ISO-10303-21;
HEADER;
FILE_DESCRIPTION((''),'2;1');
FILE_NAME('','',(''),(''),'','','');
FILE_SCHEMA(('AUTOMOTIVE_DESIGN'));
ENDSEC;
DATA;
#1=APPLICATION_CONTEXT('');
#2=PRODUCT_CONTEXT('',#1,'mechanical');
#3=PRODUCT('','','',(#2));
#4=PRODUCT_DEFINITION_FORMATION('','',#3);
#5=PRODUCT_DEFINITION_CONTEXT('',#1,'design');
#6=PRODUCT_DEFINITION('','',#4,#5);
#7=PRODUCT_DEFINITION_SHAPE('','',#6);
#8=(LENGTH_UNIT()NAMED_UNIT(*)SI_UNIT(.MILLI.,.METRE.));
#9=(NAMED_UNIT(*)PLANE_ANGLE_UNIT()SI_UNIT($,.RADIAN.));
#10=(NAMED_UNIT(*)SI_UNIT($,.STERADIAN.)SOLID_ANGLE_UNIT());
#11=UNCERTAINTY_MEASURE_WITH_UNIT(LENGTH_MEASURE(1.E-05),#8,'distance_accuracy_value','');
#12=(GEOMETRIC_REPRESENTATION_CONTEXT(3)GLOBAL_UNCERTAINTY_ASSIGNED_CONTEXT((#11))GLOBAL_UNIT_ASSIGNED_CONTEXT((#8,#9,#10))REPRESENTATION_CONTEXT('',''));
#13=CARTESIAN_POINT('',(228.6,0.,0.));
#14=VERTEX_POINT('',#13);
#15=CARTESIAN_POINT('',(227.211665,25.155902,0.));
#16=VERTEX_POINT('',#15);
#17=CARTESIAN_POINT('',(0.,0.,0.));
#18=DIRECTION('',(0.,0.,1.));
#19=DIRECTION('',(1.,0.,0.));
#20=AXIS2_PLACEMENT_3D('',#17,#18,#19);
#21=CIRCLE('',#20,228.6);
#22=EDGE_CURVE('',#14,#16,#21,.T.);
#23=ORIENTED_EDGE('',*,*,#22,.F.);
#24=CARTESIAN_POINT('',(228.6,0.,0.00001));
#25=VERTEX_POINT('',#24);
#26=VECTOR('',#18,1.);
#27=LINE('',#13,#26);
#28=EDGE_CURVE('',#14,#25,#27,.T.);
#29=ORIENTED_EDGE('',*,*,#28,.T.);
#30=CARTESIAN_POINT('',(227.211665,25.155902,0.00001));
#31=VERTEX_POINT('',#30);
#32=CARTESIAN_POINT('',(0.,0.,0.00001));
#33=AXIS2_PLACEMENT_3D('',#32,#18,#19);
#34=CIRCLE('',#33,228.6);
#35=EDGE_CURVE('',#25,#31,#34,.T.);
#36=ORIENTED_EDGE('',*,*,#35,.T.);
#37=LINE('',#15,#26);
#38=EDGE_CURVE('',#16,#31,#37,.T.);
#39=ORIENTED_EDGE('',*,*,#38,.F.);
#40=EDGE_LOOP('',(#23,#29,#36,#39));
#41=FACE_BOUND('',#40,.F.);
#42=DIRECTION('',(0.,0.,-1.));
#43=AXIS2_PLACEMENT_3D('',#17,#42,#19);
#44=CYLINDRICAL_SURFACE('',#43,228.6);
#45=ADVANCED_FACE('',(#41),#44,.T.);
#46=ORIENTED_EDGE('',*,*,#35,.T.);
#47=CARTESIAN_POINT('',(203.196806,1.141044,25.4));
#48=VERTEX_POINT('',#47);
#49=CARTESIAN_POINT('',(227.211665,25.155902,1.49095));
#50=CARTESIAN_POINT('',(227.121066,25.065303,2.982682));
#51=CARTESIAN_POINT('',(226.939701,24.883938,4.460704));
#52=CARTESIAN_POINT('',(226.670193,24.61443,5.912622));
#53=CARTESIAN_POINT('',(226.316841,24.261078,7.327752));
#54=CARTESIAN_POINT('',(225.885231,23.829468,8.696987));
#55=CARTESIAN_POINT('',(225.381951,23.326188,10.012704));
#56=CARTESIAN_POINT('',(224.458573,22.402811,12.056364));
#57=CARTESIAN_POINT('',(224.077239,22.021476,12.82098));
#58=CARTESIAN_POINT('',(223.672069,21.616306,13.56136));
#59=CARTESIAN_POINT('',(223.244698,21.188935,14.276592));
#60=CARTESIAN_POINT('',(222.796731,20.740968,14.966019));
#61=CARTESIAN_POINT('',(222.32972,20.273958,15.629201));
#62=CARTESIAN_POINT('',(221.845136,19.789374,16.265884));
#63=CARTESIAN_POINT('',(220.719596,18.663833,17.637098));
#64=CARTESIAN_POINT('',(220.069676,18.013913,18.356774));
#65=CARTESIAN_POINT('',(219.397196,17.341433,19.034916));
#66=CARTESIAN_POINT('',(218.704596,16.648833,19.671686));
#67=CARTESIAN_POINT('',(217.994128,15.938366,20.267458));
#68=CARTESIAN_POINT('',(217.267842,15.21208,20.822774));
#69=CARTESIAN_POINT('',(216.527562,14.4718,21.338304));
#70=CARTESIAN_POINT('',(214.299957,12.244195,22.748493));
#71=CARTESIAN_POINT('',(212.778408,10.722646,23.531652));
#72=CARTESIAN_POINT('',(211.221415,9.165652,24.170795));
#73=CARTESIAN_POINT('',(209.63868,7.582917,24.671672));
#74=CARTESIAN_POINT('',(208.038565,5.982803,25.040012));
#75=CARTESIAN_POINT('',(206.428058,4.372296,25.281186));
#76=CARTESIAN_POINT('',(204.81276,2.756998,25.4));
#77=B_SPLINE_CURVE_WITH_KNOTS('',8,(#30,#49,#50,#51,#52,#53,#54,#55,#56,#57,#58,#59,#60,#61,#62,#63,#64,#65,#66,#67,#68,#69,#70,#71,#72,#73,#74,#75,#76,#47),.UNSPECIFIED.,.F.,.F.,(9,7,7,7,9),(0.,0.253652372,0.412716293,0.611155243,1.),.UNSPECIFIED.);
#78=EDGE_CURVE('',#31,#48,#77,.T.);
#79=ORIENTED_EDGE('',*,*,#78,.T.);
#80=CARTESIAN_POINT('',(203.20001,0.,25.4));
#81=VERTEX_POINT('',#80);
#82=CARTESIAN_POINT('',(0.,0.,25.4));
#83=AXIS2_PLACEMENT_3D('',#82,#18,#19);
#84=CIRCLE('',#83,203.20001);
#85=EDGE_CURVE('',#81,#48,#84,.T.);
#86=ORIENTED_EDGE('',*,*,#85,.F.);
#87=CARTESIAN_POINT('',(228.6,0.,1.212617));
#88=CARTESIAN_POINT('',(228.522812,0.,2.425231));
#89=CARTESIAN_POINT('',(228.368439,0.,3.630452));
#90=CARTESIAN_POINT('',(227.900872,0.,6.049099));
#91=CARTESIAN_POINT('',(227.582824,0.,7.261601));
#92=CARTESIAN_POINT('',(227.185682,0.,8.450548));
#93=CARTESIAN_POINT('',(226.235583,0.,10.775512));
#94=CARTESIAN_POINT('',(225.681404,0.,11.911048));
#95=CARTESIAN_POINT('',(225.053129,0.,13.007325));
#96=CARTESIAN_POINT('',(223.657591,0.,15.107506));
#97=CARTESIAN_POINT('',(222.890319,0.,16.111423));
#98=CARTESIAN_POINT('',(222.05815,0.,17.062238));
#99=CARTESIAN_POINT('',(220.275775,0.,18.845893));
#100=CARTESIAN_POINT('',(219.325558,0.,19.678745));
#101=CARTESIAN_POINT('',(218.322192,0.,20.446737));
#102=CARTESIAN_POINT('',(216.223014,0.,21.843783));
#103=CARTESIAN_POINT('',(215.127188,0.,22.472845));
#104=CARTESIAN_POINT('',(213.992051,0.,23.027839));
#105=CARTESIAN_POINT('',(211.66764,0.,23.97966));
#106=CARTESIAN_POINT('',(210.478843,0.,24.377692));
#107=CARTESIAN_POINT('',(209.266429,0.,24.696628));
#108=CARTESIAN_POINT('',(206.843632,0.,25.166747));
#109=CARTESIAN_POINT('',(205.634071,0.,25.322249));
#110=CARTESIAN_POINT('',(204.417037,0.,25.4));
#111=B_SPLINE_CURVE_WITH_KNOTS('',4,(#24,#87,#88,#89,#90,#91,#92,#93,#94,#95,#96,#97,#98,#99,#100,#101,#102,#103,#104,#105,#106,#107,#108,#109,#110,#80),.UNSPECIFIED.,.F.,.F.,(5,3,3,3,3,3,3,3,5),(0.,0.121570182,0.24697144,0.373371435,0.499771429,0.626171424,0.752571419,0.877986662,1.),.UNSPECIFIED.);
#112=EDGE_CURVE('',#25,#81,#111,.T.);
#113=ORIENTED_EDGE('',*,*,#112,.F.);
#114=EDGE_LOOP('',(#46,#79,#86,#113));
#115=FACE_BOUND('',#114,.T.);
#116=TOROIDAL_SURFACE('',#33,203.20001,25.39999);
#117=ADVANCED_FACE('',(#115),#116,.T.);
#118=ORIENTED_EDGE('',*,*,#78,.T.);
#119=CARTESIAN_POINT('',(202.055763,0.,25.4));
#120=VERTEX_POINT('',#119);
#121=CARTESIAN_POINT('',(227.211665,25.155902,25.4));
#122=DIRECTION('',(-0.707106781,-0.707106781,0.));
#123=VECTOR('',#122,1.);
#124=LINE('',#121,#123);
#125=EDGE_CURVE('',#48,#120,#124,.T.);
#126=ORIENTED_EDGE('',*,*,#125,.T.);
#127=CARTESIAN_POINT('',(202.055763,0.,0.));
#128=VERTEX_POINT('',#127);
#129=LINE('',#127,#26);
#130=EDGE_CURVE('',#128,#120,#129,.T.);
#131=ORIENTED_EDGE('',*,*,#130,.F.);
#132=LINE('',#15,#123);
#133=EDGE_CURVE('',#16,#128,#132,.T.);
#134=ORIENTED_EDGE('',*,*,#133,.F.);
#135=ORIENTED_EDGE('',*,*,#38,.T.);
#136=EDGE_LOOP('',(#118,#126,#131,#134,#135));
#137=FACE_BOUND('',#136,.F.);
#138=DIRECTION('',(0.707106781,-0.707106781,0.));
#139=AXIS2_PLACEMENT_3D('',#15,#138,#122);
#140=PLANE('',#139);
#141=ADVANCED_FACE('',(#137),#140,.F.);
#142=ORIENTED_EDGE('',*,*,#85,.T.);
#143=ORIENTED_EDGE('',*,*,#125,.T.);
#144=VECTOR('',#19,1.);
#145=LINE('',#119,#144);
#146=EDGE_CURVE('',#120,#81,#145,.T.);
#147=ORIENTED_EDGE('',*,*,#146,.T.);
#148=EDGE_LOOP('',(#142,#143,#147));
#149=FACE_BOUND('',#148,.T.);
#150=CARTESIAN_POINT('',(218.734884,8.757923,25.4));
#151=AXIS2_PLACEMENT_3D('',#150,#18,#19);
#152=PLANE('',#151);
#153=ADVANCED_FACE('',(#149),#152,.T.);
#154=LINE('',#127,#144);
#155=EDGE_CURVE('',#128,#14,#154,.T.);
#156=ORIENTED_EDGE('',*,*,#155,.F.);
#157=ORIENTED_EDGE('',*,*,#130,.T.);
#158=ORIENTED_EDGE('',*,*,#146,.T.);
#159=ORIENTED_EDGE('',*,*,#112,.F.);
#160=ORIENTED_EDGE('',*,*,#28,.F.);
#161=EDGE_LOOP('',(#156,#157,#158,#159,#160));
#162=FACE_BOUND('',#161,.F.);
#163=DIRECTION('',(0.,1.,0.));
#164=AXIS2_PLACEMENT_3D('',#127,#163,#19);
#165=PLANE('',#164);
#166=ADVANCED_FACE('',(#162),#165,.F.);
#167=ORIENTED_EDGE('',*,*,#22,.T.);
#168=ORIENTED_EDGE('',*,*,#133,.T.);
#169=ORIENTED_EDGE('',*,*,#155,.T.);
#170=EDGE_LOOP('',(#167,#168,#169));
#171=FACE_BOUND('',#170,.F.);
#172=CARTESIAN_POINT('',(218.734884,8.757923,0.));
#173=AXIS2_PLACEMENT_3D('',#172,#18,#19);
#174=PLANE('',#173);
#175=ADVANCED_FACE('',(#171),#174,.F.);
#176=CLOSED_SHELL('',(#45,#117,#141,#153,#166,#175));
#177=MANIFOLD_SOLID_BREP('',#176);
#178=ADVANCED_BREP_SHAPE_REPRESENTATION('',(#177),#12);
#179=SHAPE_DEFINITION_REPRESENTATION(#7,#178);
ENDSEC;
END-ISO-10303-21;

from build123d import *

# Parameters (mm, degrees)
F2_DEPTH = 25.4
F3_R     = 25.39999


# Not quite as in the source:
# - a fillet or chamfer is up to 0.001 mm smaller than in the source, because OpenCascade refuses the exact size


with BuildPart() as f2:
    # F1 (on face) → F2 (new body)
    with BuildSketch(Plane.XY):
        with BuildLine():
            Line((202.0557627241, 0), (228.6, 0))
            ThreePointArc((228.6, 0), (228.2526522951, 12.5970917379), (227.2116647397, 25.1559020156))
            Line((227.2116647397, 25.1559020156), (202.0557627241, 0))
        make_face()
    extrude(amount=F2_DEPTH)

    # F3 (radius 25.4 in the source; OpenCascade refuses exactly that, so slightly less here)
    f3_edges = [f2.edges().sort_by_distance(p)[0] for p in [
        (228.252652, 12.597092, 25.4),
    ]]
    fillet(f3_edges, radius=F3_R)


solid = f2.part
